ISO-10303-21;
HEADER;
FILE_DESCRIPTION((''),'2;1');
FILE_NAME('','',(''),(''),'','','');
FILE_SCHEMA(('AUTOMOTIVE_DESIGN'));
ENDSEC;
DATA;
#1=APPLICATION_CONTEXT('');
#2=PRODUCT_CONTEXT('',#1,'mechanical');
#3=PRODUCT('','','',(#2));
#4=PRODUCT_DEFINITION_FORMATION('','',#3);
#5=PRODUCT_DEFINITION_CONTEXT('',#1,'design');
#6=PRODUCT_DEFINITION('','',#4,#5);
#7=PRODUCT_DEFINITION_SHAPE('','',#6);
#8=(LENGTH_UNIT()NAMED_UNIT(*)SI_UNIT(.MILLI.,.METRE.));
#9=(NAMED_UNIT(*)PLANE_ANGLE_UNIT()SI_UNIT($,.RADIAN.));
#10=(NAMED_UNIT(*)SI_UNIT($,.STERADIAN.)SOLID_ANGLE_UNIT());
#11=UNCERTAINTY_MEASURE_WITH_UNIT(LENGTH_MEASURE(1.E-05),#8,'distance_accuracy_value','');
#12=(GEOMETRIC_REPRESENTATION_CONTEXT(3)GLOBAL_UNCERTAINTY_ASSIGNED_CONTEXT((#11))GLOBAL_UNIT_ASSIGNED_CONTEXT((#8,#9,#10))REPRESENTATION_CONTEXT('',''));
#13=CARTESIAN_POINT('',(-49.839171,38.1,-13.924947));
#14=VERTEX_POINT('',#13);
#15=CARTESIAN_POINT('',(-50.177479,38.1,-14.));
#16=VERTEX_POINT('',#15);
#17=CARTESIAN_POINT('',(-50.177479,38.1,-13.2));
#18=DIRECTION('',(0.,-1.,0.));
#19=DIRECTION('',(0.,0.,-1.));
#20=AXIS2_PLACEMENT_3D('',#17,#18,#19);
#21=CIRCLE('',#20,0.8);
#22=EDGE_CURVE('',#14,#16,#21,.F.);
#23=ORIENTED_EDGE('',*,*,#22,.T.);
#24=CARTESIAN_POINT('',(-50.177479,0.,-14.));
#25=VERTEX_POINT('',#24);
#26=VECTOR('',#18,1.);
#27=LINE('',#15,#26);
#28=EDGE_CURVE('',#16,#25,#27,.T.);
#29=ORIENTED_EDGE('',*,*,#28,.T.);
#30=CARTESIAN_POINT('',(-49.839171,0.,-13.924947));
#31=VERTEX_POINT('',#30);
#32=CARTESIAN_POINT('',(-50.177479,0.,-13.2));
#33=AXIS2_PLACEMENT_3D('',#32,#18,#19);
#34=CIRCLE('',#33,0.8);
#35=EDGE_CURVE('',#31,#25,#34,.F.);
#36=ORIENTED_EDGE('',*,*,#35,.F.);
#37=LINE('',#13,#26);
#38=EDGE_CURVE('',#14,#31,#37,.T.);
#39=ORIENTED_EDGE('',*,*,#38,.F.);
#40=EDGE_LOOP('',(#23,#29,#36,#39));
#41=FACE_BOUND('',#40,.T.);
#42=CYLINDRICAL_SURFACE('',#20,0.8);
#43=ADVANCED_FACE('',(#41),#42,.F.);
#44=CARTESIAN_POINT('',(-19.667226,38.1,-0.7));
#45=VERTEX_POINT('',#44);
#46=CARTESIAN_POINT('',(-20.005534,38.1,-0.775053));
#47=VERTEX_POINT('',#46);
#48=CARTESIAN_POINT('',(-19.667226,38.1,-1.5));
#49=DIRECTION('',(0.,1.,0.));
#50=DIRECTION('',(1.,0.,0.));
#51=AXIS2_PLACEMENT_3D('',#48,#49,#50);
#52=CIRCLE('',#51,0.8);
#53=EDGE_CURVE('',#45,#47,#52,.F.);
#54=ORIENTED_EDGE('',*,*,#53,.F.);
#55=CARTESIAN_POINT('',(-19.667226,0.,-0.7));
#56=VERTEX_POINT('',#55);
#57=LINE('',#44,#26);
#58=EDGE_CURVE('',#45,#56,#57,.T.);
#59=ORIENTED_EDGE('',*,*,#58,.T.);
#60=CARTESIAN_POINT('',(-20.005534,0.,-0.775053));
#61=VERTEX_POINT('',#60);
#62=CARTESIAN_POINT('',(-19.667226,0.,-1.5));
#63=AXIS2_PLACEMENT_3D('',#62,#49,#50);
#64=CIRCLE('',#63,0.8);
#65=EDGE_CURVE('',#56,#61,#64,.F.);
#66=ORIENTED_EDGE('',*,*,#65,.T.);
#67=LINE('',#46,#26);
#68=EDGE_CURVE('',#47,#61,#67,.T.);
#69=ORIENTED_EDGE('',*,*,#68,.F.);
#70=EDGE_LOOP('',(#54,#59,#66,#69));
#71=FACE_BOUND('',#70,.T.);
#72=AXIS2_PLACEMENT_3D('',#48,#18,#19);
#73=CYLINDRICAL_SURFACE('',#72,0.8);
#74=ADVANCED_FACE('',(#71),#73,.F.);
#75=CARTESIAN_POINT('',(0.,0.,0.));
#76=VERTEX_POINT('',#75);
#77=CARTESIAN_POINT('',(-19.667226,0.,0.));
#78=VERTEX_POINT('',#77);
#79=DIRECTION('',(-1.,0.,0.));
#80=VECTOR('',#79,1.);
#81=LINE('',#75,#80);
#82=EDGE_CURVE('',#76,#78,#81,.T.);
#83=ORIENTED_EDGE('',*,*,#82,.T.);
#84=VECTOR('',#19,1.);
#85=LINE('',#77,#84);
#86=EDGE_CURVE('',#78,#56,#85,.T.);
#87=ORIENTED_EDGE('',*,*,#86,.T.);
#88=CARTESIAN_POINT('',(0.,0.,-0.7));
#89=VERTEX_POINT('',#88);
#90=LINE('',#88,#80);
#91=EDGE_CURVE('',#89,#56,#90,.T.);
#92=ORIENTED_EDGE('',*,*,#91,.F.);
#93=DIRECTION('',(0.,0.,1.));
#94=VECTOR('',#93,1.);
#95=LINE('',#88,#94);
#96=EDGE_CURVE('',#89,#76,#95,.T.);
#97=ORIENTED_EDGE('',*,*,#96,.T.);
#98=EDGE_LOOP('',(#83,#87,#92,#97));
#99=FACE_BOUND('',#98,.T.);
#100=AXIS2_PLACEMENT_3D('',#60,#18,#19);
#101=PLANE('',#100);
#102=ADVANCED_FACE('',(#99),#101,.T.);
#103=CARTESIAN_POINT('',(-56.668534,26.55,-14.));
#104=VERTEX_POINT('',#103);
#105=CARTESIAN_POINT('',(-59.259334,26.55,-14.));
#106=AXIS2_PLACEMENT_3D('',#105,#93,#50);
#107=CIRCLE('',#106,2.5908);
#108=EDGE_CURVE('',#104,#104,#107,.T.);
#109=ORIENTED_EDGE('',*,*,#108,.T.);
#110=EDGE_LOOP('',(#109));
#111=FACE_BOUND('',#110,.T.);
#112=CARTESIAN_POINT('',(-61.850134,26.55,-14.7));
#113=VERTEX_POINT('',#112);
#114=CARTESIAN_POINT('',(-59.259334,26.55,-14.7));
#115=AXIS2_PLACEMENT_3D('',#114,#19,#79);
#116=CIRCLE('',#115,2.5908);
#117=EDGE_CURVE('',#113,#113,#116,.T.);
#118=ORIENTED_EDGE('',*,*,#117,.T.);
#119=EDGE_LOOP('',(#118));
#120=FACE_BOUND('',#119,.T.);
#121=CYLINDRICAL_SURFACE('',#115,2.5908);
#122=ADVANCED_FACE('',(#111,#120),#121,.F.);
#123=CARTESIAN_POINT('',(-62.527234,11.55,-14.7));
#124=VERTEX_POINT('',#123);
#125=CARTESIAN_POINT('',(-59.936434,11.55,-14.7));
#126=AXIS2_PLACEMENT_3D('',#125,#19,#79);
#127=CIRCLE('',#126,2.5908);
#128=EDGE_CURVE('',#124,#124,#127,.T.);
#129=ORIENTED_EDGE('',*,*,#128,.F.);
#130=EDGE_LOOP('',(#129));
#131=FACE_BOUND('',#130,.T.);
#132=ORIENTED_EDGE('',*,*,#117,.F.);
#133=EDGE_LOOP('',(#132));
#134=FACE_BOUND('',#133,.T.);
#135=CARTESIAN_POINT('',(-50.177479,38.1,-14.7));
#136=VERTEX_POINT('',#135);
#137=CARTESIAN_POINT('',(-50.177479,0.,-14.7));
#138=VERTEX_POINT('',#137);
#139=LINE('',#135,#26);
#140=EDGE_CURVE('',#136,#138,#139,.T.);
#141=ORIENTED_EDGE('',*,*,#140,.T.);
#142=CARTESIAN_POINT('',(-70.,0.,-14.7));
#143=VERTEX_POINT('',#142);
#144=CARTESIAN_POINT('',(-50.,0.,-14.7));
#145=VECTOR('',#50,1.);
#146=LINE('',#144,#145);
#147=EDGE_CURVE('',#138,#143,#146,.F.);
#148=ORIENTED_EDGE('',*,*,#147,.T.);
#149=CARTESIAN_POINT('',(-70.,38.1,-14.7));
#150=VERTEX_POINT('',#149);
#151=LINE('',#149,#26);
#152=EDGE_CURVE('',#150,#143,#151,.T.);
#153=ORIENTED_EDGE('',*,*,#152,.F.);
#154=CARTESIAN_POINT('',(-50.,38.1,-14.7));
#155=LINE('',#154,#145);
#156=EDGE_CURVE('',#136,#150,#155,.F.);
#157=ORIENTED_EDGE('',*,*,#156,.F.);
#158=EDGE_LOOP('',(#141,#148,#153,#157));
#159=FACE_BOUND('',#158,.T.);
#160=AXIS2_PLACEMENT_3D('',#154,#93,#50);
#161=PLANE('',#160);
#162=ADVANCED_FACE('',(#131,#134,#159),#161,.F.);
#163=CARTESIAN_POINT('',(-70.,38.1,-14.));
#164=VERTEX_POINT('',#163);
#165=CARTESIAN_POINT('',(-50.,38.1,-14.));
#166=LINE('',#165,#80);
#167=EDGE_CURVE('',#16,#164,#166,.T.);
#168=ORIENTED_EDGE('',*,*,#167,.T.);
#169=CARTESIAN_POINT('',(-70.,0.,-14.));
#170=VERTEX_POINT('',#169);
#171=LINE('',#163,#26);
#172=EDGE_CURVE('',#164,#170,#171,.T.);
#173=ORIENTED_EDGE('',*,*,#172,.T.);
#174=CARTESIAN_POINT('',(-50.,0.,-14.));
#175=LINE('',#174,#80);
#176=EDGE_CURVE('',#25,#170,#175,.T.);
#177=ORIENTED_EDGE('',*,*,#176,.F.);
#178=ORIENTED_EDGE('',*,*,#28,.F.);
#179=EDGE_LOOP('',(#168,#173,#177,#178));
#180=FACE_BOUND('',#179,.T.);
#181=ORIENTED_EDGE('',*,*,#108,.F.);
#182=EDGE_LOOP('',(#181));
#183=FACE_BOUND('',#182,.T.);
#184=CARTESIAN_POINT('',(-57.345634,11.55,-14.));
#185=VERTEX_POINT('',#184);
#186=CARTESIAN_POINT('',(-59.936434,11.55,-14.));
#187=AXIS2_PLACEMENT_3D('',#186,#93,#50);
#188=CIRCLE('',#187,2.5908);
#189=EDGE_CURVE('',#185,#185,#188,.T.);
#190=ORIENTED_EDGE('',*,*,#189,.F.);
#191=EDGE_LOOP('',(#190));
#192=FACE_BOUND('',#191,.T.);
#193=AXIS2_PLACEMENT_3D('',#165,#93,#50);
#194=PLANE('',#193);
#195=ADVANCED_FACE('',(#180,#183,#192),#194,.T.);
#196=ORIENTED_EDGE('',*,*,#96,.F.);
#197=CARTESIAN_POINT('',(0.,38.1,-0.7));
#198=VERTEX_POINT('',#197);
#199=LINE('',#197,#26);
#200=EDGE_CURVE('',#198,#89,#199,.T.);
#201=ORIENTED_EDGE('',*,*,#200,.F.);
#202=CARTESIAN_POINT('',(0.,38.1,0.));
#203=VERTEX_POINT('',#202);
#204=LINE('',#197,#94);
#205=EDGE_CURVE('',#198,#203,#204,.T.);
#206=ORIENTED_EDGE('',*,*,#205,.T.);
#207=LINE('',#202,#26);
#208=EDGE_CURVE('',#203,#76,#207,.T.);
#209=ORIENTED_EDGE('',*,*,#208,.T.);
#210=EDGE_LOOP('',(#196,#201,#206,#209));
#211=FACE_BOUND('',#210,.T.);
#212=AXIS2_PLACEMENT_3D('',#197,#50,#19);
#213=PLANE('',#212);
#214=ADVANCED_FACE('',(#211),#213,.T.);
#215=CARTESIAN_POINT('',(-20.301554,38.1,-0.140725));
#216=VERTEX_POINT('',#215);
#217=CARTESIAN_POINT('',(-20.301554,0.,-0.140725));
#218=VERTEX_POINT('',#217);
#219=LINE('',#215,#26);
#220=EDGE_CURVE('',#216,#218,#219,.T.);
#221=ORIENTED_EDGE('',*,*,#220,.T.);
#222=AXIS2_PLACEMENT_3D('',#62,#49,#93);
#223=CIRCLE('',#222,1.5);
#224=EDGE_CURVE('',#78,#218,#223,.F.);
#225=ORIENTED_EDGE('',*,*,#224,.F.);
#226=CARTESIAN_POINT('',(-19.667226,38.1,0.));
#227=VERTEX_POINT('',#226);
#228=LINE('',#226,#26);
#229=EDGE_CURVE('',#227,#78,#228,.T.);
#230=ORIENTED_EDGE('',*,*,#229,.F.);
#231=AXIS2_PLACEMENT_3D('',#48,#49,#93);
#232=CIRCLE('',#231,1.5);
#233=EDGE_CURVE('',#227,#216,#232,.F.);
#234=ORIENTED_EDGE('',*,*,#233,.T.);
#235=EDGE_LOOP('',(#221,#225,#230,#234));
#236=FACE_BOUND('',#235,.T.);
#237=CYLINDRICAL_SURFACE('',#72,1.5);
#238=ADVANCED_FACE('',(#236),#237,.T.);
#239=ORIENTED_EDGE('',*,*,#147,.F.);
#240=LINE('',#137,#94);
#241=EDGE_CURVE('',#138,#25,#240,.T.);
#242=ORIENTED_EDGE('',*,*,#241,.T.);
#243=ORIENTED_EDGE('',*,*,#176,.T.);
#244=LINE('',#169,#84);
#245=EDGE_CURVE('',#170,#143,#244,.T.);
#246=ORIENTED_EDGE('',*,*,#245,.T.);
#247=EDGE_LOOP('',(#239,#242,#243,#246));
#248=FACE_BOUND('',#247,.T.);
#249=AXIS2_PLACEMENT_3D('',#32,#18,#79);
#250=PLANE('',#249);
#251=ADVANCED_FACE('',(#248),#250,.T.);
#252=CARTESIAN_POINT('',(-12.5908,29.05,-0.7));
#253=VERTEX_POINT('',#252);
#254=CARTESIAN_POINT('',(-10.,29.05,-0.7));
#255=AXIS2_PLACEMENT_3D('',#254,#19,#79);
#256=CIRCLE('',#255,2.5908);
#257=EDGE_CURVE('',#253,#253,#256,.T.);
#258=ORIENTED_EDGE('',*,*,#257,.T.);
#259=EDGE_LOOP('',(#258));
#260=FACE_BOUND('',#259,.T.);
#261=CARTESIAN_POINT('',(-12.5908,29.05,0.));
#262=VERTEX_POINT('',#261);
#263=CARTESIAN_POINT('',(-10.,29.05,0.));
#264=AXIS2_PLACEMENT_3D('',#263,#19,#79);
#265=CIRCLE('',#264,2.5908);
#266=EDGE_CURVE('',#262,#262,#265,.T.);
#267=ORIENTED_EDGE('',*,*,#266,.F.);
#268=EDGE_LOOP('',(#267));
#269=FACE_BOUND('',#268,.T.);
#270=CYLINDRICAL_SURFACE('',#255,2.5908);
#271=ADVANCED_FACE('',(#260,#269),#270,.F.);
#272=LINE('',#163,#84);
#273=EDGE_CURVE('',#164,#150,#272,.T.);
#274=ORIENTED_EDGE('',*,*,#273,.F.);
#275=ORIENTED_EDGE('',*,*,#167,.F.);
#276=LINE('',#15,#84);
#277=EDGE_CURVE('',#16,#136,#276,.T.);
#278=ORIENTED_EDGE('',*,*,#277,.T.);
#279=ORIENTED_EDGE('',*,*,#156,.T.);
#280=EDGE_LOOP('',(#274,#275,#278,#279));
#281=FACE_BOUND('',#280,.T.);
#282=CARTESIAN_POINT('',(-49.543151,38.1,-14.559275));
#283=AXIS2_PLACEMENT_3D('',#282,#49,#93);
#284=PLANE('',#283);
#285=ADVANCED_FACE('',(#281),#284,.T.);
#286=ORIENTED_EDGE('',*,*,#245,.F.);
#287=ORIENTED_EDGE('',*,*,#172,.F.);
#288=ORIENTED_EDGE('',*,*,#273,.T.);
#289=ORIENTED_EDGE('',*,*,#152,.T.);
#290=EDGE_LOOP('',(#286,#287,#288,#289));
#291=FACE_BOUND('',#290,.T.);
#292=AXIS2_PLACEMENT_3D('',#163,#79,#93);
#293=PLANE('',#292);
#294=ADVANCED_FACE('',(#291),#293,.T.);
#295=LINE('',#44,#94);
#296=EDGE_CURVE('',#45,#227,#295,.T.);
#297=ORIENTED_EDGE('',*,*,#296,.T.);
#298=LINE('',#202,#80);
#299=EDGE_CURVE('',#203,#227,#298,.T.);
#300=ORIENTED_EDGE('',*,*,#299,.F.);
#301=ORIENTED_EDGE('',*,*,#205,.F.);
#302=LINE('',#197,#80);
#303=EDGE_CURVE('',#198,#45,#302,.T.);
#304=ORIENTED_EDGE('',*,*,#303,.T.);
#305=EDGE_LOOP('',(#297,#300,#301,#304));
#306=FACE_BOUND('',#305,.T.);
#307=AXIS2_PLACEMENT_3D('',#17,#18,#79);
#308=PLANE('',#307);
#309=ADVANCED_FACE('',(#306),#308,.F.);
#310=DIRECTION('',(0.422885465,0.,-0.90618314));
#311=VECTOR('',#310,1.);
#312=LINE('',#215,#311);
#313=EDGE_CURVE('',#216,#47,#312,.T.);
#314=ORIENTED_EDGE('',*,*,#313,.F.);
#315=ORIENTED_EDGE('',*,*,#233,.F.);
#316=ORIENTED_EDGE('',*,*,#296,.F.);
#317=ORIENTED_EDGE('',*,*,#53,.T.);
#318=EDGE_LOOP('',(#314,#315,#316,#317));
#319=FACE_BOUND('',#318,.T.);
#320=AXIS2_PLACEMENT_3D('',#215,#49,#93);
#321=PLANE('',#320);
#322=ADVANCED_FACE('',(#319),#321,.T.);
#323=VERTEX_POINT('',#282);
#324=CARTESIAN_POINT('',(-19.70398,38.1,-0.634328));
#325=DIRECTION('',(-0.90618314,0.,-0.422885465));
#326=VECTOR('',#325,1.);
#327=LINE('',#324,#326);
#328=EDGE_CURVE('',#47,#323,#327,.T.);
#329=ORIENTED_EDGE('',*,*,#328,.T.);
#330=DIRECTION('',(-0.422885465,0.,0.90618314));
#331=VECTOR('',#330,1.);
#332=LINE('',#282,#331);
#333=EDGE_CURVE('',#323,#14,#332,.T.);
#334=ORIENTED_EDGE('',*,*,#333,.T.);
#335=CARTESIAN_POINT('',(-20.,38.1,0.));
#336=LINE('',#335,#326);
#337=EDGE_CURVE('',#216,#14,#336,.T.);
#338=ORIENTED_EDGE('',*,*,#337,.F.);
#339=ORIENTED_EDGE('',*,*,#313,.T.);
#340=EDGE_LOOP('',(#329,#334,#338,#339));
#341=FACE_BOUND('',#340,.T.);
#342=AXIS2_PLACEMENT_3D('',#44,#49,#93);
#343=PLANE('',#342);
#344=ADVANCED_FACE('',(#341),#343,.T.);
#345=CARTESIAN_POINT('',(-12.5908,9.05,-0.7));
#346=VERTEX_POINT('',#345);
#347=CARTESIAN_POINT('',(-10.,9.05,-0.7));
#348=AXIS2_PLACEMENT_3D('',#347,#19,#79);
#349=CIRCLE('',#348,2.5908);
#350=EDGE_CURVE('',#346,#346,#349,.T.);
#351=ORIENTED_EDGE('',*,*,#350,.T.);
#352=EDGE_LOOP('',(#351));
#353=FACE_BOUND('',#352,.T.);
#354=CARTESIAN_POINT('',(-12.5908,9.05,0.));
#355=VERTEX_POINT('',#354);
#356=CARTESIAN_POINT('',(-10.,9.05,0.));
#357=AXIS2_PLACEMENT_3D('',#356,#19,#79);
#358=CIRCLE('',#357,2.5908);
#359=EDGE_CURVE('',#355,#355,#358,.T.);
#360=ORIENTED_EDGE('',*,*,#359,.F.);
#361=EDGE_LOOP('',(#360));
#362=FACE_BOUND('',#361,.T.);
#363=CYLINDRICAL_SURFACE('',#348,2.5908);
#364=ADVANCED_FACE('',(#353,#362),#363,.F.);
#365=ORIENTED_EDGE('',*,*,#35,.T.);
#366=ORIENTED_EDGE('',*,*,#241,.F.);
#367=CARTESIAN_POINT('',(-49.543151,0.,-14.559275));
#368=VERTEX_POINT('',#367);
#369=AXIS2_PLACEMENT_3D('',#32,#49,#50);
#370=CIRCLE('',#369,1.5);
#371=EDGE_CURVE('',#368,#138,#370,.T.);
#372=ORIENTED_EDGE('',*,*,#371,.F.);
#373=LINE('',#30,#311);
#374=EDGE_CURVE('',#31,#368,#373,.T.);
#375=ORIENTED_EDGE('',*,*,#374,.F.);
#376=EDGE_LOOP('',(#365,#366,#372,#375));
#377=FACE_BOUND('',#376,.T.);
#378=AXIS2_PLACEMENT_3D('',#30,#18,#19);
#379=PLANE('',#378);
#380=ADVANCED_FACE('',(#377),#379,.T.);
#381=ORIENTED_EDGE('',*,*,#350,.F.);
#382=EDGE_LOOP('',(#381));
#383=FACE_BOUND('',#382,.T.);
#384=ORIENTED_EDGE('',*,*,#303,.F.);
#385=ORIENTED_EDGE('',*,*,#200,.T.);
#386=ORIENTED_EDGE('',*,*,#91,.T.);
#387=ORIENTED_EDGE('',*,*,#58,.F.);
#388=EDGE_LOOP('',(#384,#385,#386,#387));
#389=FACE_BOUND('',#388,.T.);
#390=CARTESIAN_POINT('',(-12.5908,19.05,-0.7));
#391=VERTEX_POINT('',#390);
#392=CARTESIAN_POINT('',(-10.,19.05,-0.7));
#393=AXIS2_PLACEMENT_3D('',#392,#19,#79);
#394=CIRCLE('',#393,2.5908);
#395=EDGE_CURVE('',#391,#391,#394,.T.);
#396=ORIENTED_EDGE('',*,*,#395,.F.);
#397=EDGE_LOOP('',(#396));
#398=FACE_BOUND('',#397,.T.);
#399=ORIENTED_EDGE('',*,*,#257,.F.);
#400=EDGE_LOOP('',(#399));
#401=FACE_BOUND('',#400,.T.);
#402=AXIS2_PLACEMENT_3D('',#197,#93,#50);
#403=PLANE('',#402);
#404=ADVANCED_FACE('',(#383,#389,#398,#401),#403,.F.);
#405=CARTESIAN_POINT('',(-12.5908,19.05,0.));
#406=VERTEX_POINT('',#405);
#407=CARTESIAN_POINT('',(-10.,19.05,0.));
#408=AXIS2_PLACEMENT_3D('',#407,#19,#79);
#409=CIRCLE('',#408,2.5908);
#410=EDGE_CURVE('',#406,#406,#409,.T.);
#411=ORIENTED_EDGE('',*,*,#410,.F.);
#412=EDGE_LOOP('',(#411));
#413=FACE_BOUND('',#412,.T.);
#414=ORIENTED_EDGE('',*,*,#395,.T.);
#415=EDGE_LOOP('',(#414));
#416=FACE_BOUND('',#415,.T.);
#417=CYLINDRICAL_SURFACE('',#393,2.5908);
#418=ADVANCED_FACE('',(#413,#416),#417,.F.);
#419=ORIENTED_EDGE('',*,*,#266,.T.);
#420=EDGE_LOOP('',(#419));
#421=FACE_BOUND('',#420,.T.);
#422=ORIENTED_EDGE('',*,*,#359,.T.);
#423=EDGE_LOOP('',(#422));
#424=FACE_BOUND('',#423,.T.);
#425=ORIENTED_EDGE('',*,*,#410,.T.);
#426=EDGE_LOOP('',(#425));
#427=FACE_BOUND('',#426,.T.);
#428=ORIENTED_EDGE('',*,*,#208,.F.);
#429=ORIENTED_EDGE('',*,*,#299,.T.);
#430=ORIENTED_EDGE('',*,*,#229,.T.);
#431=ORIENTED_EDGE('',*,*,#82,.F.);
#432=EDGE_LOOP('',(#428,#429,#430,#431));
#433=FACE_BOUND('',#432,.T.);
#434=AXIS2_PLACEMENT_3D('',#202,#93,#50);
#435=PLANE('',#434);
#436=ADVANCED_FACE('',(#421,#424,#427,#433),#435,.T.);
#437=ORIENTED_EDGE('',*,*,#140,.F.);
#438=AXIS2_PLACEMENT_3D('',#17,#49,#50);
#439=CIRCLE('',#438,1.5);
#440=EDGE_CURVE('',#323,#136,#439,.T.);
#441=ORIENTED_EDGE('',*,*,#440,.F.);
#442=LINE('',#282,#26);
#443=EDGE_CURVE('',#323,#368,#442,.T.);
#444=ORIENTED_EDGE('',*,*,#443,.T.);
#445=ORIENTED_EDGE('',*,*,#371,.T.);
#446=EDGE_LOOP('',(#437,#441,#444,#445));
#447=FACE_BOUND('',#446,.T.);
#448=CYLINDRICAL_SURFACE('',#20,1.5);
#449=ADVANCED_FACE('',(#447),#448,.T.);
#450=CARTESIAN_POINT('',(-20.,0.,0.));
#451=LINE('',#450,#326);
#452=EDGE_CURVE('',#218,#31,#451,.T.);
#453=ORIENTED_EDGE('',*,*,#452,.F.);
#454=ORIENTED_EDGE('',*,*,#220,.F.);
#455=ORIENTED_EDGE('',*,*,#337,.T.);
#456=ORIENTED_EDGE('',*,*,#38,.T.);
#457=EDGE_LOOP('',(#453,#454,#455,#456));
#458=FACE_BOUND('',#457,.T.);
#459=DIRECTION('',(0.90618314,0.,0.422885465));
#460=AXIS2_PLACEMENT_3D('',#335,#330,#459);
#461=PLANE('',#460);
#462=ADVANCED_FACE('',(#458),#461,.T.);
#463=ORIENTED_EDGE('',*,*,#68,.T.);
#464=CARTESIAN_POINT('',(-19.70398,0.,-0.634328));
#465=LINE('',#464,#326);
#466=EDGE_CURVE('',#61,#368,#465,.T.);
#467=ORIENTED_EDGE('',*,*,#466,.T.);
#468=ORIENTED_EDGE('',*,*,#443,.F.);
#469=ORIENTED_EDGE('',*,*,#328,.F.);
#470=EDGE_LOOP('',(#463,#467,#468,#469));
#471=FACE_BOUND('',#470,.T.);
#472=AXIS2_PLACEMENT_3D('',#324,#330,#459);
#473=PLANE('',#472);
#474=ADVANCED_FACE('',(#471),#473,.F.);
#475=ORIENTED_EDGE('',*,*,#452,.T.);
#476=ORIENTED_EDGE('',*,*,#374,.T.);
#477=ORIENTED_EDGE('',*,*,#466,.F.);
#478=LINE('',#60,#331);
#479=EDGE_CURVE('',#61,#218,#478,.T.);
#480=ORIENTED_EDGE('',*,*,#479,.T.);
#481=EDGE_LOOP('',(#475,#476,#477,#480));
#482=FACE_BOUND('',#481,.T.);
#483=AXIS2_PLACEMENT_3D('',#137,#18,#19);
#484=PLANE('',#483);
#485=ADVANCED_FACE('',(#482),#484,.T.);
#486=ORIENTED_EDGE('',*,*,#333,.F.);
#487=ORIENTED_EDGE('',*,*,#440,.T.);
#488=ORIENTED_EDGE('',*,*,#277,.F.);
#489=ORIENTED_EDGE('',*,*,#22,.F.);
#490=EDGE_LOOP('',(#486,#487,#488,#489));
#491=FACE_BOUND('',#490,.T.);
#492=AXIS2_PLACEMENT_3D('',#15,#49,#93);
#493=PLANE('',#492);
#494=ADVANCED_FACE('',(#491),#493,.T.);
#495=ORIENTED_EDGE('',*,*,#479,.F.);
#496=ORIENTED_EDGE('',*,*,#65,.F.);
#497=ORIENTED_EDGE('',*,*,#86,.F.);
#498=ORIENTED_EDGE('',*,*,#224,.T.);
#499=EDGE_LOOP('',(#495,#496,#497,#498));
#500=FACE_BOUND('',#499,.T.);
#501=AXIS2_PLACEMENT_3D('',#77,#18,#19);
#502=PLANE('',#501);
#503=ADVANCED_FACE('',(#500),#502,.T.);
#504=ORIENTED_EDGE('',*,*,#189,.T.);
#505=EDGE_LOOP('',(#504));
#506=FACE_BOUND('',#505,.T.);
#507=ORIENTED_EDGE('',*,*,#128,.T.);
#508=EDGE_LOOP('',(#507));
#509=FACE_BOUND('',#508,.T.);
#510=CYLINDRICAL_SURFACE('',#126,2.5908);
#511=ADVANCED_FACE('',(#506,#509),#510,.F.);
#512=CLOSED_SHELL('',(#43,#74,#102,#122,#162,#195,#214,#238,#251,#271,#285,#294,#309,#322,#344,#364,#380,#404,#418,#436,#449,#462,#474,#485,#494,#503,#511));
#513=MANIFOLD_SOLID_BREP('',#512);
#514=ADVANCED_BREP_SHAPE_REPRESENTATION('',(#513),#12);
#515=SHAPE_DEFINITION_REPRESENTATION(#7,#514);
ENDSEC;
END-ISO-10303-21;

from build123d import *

# Parameters (mm, degrees)
BASE_FLANGE1_DEPTH         = 38.1
F_6_0_204_DIAMETER_HOLE1_D = 5.1816
F_6_0_204_DIAMETER_HOLE2_D = 5.1816


# Sheet-metal steps are written as plain solids
with BuildPart() as part:
    # Sketch1 → Base-Flange1 (new body)
    with BuildSketch(Plane(origin=(0, 0, 0), x_dir=(1, 0, 0), z_dir=(0, 1, 0))):
        with BuildLine():
            Line((0, 0), (-19.667225995, 0))
            ThreePointArc((-19.667225995, 0), (-19.992101306, 0.035603868), (-20.301554193, 0.14072529))
            Line((-20.301554193, 0.14072529), (-49.839171097, 13.924946512))
            ThreePointArc((-49.839171097, 13.924946512), (-50.004212637, 13.981011271), (-50.177479469, 14))
            Line((-50.177479469, 14), (-70, 14))
            Line((-70, 14), (-70, 14.7))
            Line((-70, 14.7), (-50.177479469, 14.7))
            ThreePointArc((-50.177479469, 14.7), (-49.852604159, 14.664396132), (-49.543151271, 14.55927471))
            Line((-49.543151271, 14.55927471), (-20.005534367, 0.775053488))
            ThreePointArc((-20.005534367, 0.775053488), (-19.840492827, 0.718988729), (-19.667225995, 0.7))
            Line((-19.667225995, 0.7), (0, 0.7))
            Line((0, 0.7), (0, 0))
        make_face()
    extrude(amount=BASE_FLANGE1_DEPTH)

    # #6 (0.204) Diameter Hole1 (through all)
    with Locations(Plane(origin=(0, 0, -0.7), x_dir=(-1, 0, 0), z_dir=(0, 0, -1))):
        with Locations((10, 29.05), (10, 19.05), (10, 9.05)):
            Hole(F_6_0_204_DIAMETER_HOLE1_D / 2)

    # #6 (0.204) Diameter Hole2 (through all)
    with Locations(Plane(origin=(0, 0, -14.7), x_dir=(-1, 0, 0), z_dir=(0, 0, -1))):
        with Locations((59.259333943, 26.55), (59.936433657, 11.55)):
            Hole(F_6_0_204_DIAMETER_HOLE2_D / 2)


solid = part.part
